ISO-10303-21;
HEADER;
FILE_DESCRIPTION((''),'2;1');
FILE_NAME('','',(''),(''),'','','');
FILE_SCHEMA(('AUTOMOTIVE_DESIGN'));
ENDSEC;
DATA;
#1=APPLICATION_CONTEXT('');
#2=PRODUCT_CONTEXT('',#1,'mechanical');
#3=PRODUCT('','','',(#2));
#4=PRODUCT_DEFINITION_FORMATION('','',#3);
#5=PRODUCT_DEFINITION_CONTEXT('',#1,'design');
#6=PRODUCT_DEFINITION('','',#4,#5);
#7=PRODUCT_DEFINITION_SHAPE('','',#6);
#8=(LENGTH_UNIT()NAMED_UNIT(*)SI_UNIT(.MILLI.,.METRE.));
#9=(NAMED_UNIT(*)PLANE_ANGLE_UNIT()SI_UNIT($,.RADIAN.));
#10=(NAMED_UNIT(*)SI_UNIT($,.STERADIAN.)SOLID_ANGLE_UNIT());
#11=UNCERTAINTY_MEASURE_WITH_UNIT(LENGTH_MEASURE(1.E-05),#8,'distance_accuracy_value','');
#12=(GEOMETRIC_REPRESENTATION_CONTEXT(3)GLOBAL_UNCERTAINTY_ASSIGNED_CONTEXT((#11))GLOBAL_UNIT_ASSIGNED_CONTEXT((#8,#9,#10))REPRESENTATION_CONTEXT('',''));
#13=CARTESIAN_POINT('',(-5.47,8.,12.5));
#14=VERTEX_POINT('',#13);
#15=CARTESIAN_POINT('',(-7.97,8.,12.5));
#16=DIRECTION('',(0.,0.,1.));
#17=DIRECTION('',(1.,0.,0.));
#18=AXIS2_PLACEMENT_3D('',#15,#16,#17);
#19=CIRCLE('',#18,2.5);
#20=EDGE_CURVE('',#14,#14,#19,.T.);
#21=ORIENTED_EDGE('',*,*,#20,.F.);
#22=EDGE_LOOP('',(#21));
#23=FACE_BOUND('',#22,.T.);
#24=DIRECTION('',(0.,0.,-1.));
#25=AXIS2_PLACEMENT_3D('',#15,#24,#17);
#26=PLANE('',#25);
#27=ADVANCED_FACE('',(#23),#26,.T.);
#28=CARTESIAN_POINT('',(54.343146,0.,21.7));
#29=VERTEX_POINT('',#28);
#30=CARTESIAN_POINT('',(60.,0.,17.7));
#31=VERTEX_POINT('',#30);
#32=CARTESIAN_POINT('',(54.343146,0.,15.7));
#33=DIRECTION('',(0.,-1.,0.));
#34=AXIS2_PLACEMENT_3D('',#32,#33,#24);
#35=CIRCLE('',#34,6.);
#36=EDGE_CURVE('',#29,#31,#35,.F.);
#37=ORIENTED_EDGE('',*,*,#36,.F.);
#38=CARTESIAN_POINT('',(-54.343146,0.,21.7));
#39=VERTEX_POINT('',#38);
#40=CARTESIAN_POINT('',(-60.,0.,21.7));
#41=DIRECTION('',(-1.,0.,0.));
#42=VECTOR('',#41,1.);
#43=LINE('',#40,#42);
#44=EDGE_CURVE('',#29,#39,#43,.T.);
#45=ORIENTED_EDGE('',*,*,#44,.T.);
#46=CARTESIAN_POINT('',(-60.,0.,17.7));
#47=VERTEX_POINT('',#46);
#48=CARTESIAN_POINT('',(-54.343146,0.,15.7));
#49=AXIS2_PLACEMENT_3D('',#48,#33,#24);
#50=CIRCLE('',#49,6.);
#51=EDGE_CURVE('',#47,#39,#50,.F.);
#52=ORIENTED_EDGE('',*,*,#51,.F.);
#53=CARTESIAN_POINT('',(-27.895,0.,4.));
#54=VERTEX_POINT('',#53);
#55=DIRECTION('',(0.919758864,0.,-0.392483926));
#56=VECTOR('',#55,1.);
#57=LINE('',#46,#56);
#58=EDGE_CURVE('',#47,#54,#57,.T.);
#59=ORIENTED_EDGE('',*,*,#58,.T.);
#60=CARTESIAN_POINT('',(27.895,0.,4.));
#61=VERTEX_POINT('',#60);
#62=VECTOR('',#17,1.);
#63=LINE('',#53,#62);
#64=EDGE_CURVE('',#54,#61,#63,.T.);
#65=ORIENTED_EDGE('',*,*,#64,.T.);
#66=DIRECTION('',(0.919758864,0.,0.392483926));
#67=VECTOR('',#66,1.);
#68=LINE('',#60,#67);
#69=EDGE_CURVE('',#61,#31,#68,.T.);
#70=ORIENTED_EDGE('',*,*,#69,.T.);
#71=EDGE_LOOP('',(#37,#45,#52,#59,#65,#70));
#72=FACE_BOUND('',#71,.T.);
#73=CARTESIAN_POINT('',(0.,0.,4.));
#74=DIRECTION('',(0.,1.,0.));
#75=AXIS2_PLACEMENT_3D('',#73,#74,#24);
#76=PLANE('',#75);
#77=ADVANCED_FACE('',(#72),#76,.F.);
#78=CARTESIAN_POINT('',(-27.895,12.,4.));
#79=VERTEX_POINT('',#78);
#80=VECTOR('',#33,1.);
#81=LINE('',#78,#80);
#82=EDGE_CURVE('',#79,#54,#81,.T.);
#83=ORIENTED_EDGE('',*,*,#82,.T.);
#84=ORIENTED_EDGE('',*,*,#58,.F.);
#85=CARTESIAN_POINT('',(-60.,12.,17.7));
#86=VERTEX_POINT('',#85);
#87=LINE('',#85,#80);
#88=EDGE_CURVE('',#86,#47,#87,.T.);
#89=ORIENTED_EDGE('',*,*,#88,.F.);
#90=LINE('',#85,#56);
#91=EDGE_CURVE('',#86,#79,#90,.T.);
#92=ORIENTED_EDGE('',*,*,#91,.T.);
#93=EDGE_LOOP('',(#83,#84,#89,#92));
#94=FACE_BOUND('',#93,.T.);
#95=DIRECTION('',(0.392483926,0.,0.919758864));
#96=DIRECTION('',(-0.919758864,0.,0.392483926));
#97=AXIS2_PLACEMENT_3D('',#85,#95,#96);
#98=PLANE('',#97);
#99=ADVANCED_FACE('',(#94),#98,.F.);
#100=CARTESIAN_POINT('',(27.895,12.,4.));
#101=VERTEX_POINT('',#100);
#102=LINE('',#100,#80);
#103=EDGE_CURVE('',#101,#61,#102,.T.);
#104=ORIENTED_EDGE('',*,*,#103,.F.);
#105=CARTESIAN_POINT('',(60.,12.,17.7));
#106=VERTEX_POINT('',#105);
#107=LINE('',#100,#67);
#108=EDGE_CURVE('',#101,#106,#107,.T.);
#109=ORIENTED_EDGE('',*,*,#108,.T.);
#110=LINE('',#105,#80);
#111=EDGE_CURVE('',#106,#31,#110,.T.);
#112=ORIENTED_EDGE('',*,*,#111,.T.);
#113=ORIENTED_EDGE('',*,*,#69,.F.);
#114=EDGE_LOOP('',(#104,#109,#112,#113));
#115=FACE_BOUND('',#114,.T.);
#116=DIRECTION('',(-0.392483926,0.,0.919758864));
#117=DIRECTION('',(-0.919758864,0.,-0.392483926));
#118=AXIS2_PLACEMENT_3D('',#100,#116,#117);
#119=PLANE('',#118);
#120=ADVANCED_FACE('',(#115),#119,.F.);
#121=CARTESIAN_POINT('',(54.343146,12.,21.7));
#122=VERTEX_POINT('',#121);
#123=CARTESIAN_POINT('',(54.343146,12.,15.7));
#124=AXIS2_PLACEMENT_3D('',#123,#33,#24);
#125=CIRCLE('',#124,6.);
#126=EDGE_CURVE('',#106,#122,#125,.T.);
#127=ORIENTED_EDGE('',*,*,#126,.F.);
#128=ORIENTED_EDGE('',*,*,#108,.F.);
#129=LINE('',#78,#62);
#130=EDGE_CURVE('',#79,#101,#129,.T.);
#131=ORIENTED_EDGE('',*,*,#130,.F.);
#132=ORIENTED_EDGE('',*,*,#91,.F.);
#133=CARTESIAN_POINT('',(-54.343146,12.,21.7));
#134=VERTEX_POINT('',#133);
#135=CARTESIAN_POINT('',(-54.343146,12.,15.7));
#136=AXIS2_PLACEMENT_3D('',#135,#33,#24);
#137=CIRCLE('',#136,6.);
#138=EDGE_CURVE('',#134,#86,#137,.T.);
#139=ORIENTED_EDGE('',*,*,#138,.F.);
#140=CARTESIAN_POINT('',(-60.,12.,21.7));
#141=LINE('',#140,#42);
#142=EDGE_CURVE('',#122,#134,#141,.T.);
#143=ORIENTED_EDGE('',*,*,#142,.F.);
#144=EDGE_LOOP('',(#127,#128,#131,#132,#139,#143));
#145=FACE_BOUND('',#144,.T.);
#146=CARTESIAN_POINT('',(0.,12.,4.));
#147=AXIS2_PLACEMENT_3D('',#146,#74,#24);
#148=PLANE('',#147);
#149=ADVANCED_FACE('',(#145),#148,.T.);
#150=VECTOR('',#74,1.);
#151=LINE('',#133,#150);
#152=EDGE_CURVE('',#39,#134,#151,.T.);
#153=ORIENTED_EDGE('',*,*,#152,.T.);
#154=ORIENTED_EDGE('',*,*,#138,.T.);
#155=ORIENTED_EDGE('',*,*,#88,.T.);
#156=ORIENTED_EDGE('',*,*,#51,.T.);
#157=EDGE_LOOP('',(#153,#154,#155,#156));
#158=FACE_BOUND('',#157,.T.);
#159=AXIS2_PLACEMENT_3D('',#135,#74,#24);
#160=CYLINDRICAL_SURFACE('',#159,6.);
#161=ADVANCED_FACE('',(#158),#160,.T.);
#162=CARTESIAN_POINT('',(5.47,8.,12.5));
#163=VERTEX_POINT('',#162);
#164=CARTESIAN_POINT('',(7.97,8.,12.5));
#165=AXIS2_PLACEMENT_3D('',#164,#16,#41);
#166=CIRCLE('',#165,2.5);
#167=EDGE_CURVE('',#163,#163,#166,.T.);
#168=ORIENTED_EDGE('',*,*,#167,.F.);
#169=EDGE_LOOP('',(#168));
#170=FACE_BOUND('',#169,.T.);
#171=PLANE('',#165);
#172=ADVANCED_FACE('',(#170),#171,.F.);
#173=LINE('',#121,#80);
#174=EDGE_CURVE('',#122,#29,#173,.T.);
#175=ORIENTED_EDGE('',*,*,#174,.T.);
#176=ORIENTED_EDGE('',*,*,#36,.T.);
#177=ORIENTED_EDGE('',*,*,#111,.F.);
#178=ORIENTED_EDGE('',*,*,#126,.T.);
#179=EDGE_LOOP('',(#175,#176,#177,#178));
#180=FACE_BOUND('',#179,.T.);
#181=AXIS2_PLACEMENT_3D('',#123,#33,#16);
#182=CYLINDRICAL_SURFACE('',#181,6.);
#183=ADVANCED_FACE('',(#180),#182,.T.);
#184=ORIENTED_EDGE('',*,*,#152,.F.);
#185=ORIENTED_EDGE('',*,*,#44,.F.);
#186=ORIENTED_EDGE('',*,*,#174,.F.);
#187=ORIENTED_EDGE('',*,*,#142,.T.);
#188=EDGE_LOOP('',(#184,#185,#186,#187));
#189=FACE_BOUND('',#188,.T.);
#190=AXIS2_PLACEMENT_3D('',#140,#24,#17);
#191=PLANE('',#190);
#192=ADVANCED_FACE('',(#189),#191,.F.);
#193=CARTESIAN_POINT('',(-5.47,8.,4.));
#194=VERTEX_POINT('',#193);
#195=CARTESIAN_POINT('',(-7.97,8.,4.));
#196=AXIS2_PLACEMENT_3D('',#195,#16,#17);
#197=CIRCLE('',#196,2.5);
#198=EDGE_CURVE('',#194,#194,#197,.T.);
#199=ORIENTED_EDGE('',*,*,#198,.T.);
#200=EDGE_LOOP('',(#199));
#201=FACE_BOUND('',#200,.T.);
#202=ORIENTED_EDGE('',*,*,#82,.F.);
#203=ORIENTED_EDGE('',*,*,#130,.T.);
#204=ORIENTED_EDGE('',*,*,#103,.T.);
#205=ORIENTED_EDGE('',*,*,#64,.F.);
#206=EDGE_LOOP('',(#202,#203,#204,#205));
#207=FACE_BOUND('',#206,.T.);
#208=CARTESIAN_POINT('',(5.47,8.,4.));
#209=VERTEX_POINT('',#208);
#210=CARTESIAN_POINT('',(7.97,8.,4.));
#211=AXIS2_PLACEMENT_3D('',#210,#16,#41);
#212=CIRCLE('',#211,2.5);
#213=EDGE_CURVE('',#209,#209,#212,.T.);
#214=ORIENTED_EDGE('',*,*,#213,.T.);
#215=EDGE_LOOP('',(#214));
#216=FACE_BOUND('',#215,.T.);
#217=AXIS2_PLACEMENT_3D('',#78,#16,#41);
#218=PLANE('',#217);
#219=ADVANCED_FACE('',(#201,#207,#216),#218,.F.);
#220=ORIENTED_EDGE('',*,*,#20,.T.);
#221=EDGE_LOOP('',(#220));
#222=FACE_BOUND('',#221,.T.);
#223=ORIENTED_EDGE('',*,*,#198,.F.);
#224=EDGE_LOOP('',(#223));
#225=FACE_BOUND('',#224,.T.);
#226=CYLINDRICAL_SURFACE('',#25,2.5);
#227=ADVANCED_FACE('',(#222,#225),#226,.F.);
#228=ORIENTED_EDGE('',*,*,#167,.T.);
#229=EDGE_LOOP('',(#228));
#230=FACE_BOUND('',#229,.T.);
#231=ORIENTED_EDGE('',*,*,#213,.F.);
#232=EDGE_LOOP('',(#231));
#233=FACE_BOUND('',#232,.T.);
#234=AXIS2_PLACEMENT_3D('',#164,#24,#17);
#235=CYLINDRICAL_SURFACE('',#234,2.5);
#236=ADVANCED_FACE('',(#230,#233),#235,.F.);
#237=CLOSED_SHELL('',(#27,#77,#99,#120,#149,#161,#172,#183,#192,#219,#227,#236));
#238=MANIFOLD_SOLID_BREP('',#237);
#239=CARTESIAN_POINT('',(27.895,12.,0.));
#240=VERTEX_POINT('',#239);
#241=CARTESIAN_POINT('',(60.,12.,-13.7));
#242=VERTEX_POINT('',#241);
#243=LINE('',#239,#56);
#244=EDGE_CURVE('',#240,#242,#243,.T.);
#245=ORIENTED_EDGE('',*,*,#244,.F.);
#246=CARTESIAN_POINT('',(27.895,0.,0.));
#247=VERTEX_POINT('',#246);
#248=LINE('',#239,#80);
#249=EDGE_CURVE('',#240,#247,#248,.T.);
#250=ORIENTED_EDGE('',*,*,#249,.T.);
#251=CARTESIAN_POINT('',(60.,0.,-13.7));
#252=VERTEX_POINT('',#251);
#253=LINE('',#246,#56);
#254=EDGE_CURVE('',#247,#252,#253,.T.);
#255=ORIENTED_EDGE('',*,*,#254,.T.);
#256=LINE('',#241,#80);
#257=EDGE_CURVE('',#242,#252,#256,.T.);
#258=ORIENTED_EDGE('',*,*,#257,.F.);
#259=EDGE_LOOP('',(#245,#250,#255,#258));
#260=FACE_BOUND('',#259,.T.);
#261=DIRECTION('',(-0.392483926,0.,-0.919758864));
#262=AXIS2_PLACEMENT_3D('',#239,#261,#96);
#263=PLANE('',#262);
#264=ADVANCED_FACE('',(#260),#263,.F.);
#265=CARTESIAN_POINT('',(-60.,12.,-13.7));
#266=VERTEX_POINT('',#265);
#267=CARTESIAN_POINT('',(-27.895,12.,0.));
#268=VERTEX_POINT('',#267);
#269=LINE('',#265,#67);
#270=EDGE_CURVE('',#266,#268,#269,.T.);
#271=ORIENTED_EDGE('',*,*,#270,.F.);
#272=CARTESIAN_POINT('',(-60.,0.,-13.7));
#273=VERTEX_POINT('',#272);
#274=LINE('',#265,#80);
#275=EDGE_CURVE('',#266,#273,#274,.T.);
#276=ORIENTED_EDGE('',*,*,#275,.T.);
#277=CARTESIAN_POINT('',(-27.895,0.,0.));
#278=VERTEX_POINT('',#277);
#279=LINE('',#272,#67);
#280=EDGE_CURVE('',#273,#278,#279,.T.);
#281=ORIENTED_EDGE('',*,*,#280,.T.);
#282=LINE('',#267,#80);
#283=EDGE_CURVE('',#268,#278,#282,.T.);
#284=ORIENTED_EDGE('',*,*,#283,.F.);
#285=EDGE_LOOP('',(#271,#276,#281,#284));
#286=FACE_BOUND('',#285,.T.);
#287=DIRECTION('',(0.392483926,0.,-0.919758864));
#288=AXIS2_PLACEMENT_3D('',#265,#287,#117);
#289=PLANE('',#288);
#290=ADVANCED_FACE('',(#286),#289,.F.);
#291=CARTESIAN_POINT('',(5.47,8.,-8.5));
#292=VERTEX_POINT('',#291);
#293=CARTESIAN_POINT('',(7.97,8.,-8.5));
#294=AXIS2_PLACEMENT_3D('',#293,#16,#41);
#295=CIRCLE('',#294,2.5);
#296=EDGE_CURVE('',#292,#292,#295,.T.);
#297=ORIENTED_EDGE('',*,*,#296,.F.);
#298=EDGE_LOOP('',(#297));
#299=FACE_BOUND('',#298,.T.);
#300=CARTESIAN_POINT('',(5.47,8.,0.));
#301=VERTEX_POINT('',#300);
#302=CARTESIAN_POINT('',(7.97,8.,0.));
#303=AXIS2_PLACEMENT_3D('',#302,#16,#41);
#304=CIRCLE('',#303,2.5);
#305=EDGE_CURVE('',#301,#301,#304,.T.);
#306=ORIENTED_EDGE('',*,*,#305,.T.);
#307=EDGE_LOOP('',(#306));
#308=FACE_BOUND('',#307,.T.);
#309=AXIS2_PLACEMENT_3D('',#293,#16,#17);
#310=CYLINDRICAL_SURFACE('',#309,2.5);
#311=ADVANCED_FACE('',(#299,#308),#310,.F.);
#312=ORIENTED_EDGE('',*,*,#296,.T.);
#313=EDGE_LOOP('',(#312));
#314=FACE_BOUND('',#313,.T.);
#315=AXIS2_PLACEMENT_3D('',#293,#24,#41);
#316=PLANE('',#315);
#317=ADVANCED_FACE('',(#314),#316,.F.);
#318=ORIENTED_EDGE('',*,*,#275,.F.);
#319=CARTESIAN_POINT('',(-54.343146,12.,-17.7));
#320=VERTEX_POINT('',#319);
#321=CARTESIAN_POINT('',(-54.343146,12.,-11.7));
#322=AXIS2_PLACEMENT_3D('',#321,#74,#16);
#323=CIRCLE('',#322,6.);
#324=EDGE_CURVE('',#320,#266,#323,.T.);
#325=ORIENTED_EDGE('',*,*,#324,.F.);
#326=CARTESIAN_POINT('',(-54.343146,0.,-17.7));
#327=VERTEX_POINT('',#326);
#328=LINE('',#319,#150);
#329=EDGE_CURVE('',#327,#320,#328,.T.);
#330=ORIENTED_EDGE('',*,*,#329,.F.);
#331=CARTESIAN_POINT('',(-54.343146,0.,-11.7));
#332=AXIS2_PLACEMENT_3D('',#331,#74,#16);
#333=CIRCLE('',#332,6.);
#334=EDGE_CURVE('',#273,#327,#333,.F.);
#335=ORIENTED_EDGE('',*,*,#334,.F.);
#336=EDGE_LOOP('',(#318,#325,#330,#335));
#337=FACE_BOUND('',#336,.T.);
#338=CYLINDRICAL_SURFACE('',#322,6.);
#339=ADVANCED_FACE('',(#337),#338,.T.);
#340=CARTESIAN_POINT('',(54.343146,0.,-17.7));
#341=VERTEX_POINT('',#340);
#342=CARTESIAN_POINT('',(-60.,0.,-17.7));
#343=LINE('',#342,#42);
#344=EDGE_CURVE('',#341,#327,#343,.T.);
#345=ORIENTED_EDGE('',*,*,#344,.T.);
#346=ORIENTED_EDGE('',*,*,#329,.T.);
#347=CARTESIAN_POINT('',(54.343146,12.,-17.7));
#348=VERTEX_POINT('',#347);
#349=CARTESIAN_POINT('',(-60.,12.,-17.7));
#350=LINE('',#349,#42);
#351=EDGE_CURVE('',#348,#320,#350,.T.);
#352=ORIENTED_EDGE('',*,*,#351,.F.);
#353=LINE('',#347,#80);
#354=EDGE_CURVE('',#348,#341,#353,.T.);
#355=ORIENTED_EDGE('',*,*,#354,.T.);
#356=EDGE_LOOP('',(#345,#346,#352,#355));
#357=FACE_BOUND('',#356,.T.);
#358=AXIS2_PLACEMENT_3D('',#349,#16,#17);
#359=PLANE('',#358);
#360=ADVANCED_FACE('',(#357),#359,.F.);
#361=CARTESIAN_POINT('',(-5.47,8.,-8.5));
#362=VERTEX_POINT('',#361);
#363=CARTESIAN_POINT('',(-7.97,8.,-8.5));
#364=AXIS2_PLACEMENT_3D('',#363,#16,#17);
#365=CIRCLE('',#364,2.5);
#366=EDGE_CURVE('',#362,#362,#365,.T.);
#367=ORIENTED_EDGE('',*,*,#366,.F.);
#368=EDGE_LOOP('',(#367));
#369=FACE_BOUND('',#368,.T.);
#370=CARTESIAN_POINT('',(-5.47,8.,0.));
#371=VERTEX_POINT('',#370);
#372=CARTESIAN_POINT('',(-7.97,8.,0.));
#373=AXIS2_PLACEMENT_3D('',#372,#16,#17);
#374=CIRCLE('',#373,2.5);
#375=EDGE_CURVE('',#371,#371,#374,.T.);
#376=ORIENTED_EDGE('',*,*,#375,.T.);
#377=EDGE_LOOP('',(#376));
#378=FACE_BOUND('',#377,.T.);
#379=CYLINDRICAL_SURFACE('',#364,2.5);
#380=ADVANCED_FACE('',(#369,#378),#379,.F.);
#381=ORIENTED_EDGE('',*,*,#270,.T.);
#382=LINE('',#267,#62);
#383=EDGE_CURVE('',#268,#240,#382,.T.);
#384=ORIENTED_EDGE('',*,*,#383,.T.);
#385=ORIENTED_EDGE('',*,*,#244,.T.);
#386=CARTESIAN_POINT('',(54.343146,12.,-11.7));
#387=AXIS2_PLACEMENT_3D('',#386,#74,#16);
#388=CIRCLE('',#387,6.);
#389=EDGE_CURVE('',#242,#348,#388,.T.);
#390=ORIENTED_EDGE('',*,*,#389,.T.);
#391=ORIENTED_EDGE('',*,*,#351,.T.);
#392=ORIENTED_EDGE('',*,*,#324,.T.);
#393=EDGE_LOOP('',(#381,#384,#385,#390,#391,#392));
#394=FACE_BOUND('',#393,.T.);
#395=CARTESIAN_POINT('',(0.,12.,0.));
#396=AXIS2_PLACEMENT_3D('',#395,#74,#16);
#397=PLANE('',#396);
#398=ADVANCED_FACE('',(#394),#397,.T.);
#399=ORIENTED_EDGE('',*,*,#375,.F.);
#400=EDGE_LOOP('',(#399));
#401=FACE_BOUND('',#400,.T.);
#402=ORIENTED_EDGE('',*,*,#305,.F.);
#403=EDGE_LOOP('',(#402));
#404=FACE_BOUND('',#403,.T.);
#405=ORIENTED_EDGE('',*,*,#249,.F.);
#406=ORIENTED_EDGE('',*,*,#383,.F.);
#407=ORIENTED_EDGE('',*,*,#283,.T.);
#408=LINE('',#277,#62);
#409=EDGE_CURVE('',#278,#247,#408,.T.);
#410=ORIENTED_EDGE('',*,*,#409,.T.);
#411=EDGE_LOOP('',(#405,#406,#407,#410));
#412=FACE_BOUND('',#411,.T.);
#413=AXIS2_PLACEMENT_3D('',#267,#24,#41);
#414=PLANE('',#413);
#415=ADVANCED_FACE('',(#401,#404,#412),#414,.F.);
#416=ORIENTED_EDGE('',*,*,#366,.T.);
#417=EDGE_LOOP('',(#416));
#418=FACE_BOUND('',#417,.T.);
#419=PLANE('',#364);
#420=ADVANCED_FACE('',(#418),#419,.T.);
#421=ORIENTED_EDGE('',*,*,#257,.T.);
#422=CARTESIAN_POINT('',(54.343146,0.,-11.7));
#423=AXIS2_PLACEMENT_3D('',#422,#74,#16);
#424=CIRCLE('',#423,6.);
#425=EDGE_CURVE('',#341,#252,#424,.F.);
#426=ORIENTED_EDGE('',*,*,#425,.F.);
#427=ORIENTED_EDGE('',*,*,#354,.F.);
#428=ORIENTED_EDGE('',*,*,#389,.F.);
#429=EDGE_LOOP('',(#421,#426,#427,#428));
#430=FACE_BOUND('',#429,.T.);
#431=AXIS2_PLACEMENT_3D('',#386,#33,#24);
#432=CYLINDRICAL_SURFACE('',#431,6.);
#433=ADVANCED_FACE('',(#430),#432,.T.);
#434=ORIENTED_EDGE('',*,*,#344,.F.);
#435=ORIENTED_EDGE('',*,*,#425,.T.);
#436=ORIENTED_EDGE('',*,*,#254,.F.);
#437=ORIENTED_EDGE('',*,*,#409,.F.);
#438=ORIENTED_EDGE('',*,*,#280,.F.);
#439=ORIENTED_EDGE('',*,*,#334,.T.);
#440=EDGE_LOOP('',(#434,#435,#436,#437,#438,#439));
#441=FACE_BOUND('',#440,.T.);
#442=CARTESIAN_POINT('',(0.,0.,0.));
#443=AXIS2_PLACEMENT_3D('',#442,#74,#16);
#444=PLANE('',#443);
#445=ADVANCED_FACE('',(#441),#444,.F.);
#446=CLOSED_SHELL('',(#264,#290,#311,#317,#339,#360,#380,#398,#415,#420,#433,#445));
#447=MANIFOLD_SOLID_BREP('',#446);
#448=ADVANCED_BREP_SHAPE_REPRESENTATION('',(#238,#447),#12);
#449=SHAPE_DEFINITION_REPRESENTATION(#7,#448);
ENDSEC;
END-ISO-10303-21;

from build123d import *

# Parameters (mm, degrees)
BOSS_EXTRUDE1_DEPTH = 12
SKETCH3_R           = 2.5
CUT_EXTRUDE1_DEPTH  = 8.5
FILLET1_R           = 6


with BuildPart() as part:
    # Sketch1 → Boss-Extrude1 (new body)
    with BuildSketch(Plane(origin=(0, 0, 0), x_dir=(1, 0, 0), z_dir=(0, 1, 0))):
        Polygon((-60, 17.7), (60, 17.7), (60, 13.7), (27.895, 0), (-27.895, 0), (-60, 13.7), align=None)
    extrude(amount=BOSS_EXTRUDE1_DEPTH)

    # Sketch3 → Cut-Extrude1 (cut)
    with BuildSketch(Plane.XY):
        with Locations((-7.97, 8)):
            Circle(SKETCH3_R)
        with Locations(Location((7.97, 8, 0), (0, 0, 180))):
            Circle(SKETCH3_R)
    extrude(amount=-CUT_EXTRUDE1_DEPTH, mode=Mode.SUBTRACT)

    # Fillet1
    # the kernel refuses this fillet: 6 mm, written as the material it takes off along each edge
    with BuildSketch(Plane(origin=(60, -14.142135624, -17.7), x_dir=(-1, 0, 0), z_dir=(0, 1, 0))) as fillet1_piece_1:
        with BuildLine():
            CenterArc((5.656854249, 6), FILLET1_R, 199.471220634, 70.528779366)
            Line((0, 4), (-0.113137085, 3.96))
            ThreePointArc((-0.113137085, 3.96), (-0.12, 2), (-0.12, 0))
            Line((-0.12, 0), (0, -0.12))
            Line((0, -0.12), (5.656854249, -0.12))
            Line((5.656854249, -0.12), (5.656854249, 0))
        make_face()
    extrude(amount=40.284271247, mode=Mode.SUBTRACT)
    with BuildSketch(Plane(origin=(-60, -14.142135624, -17.7), x_dir=(1, 0, 0), z_dir=(0, 1, 0))) as fillet1_piece_2:
        with BuildLine():
            CenterArc((5.656854249, -6), FILLET1_R, 90, 70.528779366)
            Line((0, -4), (-0.113137085, -3.96))
            ThreePointArc((-0.113137085, -3.96), (-0.12, -2), (-0.12, 0))
            Line((-0.12, 0), (0, 0.12))
            Line((0, 0.12), (5.656854249, 0.12))
            Line((5.656854249, 0.12), (5.656854249, 0))
        make_face()
    extrude(amount=40.284271247, mode=Mode.SUBTRACT)


with BuildPart() as body_2:
    # Mirror2: mirrored copy
    add(part.part.mirror(Plane.XY.offset(2)))


solid = Compound([part.part, body_2.part])
